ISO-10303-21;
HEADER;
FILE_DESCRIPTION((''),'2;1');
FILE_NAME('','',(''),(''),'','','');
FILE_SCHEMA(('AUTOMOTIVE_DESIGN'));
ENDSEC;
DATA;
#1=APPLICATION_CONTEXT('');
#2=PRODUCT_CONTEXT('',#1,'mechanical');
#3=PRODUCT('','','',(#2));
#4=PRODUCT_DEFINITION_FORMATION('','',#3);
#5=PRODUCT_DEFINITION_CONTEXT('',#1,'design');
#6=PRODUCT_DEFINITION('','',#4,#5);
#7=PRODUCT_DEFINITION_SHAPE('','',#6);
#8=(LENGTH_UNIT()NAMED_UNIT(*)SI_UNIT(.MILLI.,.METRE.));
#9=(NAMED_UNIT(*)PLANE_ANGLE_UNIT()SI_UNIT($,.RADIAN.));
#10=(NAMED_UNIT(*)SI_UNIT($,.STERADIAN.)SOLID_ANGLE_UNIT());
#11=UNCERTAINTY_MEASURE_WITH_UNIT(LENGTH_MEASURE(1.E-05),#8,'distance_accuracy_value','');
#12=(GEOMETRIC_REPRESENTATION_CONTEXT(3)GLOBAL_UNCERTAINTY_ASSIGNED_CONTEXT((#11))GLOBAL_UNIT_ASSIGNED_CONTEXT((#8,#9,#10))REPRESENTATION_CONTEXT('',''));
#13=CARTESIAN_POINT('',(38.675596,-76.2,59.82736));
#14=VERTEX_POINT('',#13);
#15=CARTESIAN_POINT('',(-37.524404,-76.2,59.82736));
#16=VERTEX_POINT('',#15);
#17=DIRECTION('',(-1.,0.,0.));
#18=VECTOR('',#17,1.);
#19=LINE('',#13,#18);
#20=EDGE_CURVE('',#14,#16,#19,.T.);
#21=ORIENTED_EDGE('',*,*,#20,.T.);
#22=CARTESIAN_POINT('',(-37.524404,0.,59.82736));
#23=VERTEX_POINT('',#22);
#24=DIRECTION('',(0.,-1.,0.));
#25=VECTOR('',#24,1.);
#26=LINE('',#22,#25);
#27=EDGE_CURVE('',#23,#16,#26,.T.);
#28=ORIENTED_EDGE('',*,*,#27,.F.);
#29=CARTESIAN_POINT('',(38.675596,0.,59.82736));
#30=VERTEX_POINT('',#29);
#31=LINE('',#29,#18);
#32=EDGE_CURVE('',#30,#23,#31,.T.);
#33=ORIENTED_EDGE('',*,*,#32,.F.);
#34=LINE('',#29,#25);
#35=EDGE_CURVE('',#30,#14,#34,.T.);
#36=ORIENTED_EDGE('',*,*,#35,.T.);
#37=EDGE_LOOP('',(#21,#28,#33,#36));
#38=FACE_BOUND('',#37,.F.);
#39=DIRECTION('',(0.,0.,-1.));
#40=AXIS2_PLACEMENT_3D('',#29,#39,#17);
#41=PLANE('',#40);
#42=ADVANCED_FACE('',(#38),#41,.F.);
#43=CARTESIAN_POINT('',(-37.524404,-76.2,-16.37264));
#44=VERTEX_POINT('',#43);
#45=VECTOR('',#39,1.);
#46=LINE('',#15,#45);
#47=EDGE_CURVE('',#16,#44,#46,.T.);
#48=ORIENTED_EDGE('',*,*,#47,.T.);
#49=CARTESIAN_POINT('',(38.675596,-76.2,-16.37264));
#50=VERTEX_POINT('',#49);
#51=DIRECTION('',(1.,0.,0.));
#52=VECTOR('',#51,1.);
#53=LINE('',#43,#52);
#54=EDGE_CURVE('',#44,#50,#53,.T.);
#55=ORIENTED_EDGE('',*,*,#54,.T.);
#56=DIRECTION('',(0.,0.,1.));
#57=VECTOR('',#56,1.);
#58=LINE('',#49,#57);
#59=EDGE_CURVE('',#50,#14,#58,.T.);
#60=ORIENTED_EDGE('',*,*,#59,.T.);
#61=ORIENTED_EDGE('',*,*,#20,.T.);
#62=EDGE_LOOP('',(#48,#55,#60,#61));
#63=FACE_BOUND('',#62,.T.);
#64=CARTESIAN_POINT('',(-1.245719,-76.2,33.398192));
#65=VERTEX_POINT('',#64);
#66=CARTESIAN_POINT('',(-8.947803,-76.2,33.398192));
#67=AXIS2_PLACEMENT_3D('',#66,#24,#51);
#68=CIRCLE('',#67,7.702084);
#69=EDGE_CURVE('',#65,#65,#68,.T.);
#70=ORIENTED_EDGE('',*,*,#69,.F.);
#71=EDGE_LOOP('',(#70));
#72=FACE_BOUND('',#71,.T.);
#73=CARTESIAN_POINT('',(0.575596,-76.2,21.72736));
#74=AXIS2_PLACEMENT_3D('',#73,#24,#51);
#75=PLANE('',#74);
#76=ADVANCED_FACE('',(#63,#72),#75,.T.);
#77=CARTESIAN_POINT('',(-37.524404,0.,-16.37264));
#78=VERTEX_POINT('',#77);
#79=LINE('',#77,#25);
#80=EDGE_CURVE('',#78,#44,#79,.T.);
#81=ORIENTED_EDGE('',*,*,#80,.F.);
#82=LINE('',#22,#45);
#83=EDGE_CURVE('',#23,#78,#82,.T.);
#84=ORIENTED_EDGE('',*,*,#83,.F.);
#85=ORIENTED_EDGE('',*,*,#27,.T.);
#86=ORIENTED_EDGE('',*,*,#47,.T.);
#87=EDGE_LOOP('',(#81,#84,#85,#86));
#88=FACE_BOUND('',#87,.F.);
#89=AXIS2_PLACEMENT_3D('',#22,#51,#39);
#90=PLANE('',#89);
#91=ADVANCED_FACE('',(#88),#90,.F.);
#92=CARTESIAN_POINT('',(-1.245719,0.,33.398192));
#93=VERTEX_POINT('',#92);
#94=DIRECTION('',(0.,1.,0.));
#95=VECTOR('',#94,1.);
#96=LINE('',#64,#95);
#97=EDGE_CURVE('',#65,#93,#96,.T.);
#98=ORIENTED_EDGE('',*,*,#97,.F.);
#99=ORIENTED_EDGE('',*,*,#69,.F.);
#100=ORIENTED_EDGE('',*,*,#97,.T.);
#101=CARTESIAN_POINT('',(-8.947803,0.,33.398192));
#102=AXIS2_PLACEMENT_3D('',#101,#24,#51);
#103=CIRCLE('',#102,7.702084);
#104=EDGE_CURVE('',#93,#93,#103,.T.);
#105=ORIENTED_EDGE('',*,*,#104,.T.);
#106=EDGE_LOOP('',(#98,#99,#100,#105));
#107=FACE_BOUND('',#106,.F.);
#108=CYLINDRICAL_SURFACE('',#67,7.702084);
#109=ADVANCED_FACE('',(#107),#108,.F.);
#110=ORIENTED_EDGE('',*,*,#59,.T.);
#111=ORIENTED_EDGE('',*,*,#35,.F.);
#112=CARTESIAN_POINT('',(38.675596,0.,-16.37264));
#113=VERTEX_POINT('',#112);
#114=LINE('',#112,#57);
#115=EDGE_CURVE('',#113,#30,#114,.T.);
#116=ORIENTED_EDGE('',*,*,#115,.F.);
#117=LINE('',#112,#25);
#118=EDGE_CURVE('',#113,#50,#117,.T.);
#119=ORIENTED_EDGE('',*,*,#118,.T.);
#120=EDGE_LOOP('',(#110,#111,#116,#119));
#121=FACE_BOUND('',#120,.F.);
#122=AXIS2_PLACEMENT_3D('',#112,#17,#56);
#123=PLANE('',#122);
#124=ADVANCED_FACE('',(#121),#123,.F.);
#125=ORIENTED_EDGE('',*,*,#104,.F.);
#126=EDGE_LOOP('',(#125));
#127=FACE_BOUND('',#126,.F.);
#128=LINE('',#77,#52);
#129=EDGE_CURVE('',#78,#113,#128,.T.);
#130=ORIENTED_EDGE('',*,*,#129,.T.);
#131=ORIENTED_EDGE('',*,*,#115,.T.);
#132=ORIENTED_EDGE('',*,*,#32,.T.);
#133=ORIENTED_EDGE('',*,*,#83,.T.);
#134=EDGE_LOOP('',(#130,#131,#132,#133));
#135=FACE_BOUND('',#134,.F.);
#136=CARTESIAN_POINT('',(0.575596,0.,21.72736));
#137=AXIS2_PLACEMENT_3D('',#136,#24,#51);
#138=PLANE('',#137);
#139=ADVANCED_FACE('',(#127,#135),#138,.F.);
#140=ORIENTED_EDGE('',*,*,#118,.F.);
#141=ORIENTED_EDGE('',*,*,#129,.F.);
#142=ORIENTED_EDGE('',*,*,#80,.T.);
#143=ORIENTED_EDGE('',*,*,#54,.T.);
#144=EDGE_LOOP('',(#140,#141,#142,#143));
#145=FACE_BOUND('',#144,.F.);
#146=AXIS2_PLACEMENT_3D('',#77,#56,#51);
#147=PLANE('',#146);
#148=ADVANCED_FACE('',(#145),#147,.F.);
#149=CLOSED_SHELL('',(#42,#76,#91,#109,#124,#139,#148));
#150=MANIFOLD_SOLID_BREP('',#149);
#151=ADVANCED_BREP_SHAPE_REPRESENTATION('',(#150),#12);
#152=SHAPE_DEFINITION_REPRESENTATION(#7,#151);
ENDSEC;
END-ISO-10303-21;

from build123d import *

# Parameters (mm, degrees)
F1_DEPTH = 76.2
F2_R     = 7.702083685
F3_DEPTH = 76.2


# Not quite as in the source:
# - a feature names something its author has since deleted; it is built from what else it names


with BuildPart() as f1:
    # F0 (on Front) → F1 (new body)
    with BuildSketch(Plane.XZ):
        Polygon((-37.524404479, 59.8273601898), (-37.524404479, -16.3726398102), (38.675595521, -16.3726398102), (38.675595521, 59.8273601898), (35.8841840983, 59.8273601898), align=None)
    extrude(amount=F1_DEPTH)

    # F2 (on face) → F3 (cut)
    with BuildSketch(Plane.XZ.offset(76.2)):
        with Locations((-8.9478027076, 33.3981923759)):
            Circle(F2_R)
    extrude(amount=-F3_DEPTH, mode=Mode.SUBTRACT)


solid = f1.part
